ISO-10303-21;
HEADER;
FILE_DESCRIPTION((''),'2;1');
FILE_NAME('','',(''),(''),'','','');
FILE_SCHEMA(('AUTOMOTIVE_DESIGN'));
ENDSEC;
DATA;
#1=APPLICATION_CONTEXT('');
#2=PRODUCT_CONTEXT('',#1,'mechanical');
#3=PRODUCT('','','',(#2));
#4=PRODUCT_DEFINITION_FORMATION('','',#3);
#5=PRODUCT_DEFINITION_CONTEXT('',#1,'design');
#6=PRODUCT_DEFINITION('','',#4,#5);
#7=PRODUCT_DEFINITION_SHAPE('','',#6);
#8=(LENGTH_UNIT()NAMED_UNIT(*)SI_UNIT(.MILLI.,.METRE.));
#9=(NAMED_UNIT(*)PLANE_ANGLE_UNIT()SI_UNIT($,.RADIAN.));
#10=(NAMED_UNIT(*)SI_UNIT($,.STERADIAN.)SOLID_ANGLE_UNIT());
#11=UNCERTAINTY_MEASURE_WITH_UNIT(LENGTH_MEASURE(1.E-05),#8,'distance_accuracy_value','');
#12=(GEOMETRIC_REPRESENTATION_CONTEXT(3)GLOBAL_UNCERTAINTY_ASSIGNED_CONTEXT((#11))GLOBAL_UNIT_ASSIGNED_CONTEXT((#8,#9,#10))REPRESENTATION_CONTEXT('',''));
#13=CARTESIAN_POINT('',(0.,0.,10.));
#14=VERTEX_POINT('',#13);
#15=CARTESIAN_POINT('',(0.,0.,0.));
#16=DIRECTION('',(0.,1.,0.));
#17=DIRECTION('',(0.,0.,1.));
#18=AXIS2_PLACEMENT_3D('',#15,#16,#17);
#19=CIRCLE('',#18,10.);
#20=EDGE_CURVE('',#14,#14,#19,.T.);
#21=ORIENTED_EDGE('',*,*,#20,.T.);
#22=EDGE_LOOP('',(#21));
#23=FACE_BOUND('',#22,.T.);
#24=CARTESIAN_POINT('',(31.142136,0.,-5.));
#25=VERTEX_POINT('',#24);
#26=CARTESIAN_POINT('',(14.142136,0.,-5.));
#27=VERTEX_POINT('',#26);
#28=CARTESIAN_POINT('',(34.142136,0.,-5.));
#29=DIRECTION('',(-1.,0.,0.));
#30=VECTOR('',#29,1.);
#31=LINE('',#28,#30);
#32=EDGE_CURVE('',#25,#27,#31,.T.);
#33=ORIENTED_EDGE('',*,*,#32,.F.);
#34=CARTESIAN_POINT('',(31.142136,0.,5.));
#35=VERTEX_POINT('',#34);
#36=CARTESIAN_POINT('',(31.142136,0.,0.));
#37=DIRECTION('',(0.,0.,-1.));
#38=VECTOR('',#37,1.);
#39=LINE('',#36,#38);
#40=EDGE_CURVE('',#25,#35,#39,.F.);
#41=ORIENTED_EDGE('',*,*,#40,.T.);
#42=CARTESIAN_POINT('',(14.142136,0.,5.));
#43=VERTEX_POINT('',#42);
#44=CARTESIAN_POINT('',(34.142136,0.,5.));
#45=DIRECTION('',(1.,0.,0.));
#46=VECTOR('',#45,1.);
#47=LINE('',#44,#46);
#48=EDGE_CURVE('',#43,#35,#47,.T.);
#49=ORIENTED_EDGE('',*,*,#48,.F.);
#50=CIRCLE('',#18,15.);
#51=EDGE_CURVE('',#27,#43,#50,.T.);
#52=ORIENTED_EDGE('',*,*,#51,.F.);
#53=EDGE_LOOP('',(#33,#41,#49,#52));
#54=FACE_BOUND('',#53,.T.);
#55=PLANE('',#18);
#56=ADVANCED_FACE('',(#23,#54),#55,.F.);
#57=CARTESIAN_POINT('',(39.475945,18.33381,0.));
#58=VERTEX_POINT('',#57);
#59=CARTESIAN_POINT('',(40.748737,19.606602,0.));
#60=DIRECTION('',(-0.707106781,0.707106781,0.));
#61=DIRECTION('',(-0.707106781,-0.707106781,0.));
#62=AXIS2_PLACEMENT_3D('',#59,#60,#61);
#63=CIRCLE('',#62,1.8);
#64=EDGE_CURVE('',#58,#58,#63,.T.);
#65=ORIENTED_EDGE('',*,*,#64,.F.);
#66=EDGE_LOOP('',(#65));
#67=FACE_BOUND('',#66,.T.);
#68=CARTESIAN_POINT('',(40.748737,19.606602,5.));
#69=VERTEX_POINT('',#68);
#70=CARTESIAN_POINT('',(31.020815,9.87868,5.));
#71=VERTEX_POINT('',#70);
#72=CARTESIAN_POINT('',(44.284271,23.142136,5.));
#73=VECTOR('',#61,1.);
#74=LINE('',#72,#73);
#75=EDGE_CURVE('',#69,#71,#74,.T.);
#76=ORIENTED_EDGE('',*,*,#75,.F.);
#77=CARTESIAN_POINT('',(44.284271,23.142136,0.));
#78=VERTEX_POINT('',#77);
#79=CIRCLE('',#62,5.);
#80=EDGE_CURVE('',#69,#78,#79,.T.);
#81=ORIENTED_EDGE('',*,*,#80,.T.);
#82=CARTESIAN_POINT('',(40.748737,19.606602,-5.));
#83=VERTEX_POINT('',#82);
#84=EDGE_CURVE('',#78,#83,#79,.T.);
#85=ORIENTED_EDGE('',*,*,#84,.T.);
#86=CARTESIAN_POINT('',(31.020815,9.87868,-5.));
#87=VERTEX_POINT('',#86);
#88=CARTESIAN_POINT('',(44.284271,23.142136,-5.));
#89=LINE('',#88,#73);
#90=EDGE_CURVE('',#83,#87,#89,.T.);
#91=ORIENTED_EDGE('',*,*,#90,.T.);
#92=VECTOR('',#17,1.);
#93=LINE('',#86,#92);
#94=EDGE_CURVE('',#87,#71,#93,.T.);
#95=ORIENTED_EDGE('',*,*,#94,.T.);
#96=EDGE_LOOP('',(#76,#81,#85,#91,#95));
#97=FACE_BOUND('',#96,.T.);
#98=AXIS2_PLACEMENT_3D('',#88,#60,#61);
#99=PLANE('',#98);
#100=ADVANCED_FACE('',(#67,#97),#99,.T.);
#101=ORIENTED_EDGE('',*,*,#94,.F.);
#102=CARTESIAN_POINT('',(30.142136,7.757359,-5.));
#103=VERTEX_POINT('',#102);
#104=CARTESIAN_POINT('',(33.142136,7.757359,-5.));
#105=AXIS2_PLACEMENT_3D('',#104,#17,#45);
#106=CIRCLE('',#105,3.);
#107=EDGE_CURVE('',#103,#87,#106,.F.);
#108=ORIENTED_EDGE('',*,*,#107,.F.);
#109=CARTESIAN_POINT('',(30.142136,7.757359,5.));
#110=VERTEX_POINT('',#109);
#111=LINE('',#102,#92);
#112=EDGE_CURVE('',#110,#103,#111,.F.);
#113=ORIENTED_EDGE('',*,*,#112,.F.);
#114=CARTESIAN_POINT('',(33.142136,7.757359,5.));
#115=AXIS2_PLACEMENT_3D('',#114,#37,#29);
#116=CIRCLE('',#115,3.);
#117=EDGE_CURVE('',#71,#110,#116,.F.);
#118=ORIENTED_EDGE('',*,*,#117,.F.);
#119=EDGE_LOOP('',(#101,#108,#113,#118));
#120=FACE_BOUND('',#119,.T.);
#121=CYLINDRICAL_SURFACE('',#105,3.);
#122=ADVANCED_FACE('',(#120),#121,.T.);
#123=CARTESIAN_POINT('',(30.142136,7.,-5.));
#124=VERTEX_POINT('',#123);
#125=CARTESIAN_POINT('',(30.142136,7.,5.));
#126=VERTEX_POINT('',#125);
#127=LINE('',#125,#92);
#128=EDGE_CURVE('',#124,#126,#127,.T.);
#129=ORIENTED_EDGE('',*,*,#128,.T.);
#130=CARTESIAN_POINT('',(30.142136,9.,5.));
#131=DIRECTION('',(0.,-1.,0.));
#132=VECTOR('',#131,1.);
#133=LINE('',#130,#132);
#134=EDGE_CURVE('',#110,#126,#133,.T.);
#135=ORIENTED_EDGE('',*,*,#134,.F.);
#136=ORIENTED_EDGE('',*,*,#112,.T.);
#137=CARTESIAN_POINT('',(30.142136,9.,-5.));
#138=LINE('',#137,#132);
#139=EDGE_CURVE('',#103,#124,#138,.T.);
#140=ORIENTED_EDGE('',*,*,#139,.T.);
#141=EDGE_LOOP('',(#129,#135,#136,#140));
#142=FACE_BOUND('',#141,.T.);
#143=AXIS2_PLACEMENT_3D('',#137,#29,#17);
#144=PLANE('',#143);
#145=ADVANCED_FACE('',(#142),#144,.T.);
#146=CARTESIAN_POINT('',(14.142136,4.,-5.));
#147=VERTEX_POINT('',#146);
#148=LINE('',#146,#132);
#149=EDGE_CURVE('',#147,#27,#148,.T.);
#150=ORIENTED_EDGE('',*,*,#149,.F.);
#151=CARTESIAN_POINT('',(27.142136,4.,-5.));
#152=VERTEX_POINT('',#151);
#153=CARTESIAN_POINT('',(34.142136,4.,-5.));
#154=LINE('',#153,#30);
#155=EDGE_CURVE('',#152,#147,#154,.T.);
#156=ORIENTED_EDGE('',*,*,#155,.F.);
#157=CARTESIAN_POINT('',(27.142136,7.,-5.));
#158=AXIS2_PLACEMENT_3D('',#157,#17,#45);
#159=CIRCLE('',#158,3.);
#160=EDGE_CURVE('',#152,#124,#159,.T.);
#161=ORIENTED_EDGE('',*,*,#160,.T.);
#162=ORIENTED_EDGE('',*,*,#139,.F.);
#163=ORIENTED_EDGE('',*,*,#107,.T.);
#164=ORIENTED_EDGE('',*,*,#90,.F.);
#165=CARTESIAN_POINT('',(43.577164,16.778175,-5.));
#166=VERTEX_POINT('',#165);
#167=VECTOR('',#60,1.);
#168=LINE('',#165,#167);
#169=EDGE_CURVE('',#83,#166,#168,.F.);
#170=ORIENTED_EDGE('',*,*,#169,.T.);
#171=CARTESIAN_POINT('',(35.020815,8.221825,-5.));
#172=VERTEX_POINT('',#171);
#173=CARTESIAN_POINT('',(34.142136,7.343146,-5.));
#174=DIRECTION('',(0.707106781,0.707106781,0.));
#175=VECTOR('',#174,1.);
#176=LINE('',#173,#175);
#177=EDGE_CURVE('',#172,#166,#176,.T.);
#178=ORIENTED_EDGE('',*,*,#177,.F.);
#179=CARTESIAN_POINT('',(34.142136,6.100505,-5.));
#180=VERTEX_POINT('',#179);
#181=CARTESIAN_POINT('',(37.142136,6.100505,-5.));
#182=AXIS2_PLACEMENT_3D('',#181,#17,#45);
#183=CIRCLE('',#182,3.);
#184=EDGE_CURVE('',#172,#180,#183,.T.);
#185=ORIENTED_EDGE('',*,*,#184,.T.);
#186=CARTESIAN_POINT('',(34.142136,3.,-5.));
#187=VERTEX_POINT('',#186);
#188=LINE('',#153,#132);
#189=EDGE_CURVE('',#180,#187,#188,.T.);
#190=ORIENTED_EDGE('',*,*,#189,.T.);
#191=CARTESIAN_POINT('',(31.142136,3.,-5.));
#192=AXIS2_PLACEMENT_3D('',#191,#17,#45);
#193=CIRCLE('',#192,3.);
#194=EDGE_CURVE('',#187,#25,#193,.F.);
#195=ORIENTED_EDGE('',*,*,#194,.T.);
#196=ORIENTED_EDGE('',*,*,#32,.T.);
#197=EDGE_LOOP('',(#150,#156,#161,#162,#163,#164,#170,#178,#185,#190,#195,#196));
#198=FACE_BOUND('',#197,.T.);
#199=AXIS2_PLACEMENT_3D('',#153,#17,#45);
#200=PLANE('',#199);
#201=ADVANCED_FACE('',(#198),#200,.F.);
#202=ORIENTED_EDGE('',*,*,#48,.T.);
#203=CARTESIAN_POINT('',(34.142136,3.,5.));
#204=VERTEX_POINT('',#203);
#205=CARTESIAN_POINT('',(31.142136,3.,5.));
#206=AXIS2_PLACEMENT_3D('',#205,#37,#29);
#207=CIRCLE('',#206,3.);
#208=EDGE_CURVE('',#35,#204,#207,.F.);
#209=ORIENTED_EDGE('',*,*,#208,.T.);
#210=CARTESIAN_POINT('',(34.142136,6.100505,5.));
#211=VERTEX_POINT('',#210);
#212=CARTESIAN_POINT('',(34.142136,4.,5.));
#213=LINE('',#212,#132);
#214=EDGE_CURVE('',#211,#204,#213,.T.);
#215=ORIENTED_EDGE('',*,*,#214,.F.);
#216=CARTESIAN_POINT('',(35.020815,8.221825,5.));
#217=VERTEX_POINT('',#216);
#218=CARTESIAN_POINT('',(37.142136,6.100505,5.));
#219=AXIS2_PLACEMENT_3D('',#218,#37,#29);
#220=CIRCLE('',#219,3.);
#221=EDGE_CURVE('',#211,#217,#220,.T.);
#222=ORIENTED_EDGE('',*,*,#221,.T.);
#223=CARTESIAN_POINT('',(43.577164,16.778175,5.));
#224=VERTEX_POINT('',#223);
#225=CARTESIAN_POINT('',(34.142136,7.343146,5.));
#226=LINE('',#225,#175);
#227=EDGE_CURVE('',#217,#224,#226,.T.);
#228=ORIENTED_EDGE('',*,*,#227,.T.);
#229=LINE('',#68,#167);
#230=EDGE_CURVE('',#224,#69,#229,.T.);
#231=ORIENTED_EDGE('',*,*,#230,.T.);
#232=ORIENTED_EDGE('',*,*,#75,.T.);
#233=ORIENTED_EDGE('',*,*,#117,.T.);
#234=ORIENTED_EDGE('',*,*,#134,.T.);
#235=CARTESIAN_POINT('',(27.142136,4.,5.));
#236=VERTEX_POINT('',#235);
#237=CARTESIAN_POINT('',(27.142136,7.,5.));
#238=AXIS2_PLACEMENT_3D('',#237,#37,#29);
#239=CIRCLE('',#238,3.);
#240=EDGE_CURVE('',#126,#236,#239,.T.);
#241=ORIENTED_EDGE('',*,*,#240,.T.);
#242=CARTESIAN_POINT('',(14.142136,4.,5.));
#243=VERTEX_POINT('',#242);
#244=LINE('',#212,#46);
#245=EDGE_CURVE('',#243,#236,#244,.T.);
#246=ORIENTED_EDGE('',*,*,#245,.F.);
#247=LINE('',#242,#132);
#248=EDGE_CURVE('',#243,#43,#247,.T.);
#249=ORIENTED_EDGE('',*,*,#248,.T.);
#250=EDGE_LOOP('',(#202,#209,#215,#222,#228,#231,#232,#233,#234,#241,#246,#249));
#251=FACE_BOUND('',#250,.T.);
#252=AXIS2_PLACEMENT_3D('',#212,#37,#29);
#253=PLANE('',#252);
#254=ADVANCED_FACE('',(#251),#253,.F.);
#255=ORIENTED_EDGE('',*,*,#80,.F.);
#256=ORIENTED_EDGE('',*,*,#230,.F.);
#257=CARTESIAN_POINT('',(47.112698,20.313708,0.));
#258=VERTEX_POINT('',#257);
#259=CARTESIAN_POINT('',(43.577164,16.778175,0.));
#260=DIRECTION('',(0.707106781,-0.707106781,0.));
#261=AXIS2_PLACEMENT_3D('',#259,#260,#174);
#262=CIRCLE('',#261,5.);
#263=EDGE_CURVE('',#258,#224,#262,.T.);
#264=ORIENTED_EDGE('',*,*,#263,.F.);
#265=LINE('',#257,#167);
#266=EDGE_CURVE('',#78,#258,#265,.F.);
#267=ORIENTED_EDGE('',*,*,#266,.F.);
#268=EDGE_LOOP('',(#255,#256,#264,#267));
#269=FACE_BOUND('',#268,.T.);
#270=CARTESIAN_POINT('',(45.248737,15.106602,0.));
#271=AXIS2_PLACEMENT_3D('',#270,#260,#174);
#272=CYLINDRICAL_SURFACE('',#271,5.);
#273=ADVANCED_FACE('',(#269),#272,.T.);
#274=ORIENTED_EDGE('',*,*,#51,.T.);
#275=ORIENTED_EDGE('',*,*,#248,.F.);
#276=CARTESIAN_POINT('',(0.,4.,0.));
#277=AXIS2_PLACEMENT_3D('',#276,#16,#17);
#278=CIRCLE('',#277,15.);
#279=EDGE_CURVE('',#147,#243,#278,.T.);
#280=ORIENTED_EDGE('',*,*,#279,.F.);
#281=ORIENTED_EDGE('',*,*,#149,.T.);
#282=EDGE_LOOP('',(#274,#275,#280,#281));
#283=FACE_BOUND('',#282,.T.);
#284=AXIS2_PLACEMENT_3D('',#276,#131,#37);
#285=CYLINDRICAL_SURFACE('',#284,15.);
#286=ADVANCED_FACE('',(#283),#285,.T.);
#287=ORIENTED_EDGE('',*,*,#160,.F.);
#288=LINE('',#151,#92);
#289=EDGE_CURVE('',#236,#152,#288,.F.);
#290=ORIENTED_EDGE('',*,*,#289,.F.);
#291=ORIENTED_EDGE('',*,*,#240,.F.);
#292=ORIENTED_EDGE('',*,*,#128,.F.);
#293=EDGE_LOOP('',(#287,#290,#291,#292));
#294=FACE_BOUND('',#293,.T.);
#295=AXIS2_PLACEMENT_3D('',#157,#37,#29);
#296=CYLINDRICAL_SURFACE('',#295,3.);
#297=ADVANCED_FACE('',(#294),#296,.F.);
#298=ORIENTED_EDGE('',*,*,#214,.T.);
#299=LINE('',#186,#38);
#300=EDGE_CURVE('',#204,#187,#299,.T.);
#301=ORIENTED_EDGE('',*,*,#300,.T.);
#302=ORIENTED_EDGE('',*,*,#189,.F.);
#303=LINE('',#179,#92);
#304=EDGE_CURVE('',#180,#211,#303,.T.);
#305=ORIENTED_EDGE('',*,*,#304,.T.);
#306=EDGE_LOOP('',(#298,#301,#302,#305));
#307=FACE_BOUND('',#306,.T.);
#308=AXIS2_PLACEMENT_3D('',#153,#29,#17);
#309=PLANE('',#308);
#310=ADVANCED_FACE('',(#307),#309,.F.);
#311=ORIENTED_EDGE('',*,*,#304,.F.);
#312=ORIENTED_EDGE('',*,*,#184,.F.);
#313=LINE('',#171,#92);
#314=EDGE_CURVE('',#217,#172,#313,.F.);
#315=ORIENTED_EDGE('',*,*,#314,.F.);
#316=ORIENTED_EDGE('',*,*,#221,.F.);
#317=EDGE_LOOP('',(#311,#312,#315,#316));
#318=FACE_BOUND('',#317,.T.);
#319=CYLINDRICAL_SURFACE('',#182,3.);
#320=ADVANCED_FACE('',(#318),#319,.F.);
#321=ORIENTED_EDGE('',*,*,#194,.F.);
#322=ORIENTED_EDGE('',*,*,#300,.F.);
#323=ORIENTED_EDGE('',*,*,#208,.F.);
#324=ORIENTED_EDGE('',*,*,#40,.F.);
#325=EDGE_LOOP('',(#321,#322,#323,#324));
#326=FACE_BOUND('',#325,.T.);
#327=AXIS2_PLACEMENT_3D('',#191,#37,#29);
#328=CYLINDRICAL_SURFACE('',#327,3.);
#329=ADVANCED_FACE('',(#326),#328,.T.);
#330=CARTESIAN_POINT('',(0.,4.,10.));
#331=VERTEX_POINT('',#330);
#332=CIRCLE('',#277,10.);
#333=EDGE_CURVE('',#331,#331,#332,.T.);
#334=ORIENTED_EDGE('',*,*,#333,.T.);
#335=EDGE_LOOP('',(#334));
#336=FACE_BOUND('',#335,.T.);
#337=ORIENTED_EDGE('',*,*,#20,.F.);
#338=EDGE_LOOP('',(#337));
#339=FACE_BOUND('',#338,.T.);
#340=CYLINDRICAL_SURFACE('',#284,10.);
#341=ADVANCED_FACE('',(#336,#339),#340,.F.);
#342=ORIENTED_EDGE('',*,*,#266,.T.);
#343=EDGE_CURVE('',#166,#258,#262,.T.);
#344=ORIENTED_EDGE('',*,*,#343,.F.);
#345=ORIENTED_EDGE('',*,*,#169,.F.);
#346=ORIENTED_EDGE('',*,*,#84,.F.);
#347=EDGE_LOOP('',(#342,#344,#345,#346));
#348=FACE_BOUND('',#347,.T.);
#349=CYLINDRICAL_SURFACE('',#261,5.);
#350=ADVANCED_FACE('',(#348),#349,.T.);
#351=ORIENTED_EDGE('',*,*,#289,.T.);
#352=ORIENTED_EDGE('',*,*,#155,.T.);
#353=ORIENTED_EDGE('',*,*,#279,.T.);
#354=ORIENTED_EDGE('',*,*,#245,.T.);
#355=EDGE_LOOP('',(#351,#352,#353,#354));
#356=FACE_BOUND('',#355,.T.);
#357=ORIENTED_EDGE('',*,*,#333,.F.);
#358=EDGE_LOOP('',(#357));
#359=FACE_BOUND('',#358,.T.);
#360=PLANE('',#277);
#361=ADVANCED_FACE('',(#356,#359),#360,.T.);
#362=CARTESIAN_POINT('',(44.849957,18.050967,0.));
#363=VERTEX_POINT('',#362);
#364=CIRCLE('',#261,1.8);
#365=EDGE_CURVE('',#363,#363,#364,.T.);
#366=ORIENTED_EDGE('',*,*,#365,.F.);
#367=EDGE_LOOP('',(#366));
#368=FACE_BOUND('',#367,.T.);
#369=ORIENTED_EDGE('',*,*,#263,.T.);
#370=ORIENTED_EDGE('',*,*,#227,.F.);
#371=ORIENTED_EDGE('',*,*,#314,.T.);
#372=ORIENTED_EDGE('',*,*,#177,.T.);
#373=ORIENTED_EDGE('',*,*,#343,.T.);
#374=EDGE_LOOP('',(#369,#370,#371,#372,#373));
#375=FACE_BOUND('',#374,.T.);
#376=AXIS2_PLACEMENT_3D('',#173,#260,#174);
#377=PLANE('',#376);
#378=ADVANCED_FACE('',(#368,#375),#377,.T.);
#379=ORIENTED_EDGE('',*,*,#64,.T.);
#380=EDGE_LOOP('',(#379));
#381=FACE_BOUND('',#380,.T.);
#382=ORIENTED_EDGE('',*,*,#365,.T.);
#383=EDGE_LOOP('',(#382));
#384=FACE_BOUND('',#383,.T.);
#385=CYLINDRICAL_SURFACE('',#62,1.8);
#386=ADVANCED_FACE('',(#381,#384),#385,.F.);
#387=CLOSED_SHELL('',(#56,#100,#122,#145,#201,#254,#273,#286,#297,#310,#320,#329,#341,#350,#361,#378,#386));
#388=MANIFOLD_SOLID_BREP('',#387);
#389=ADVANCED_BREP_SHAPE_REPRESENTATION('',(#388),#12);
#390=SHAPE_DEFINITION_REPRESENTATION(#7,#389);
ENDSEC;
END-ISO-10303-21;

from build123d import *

# Parameters (mm, degrees)
SKETCH2_R            = 10
BOSS_EXTRUDE1_DEPTH  = 4
BOSS_EXTRUDE2_DEPTH  = 10
FILLET1_R            = 5
M3_CLEARANCE_HOLE1_D = 3.6
FILLET2_R            = 3


with BuildPart() as part:
    # Sketch2 → Boss-Extrude1 (new body)
    with BuildSketch(Plane(origin=(0, 0, 0), x_dir=(1, 0, 0), z_dir=(0, 1, 0))):
        with BuildLine():
            Line((34.142135624, 5), (34.142135624, -5))
            Line((34.142135624, -5), (14.142135624, -5))
            ThreePointArc((14.142135624, -5), (-15, 0), (14.142135624, 5))
            Line((14.142135624, 5), (34.142135624, 5))
        make_face()
        with Locations(Location((0, 0, 0), (0, 0, 270))):
            Circle(SKETCH2_R, mode=Mode.SUBTRACT)
    extrude(amount=BOSS_EXTRUDE1_DEPTH)

    # Sketch3 → Boss-Extrude2 (add)
    with BuildSketch(Plane.XY.offset(5)):
        Polygon((34.142135624, 4), (34.142135624, 7.343145751), (47.112698372, 20.313708499), (44.284271247, 23.142135624), (30.142135624, 9), (30.142135624, 4), align=None)
    extrude(amount=-BOSS_EXTRUDE2_DEPTH)

    # Fillet1
    fillet1_edges = [part.edges().sort_by_distance(p)[0] for p in [
        (45.69848481, 21.727922061, 5),
        (45.69848481, 21.727922061, -5),
    ]]
    fillet(fillet1_edges, radius=FILLET1_R - 0.0001)  # a hair under: the kernel refuses the full size

    # M3 Clearance Hole1 (through all)
    with Locations(Plane(origin=(10.571067812, -10.571067812, 0), x_dir=(0.7071067811865486, 0.7071067811865466, 0), z_dir=(-0.7071067811865466, 0.7071067811865486, 0))):
        with Locations((42.67766953, 0)):
            Hole(M3_CLEARANCE_HOLE1_D / 2)

    # Fillet2
    fillet2_edges = [part.edges().sort_by_distance(p)[0] for p in [
        (30.142135624, 4, 0),
        (30.142135624, 9, 0),
        (34.142135624, 7.343145751, 0),
        (34.142135624, 0, 0),
    ]]
    fillet(fillet2_edges, radius=FILLET2_R)


solid = part.part
